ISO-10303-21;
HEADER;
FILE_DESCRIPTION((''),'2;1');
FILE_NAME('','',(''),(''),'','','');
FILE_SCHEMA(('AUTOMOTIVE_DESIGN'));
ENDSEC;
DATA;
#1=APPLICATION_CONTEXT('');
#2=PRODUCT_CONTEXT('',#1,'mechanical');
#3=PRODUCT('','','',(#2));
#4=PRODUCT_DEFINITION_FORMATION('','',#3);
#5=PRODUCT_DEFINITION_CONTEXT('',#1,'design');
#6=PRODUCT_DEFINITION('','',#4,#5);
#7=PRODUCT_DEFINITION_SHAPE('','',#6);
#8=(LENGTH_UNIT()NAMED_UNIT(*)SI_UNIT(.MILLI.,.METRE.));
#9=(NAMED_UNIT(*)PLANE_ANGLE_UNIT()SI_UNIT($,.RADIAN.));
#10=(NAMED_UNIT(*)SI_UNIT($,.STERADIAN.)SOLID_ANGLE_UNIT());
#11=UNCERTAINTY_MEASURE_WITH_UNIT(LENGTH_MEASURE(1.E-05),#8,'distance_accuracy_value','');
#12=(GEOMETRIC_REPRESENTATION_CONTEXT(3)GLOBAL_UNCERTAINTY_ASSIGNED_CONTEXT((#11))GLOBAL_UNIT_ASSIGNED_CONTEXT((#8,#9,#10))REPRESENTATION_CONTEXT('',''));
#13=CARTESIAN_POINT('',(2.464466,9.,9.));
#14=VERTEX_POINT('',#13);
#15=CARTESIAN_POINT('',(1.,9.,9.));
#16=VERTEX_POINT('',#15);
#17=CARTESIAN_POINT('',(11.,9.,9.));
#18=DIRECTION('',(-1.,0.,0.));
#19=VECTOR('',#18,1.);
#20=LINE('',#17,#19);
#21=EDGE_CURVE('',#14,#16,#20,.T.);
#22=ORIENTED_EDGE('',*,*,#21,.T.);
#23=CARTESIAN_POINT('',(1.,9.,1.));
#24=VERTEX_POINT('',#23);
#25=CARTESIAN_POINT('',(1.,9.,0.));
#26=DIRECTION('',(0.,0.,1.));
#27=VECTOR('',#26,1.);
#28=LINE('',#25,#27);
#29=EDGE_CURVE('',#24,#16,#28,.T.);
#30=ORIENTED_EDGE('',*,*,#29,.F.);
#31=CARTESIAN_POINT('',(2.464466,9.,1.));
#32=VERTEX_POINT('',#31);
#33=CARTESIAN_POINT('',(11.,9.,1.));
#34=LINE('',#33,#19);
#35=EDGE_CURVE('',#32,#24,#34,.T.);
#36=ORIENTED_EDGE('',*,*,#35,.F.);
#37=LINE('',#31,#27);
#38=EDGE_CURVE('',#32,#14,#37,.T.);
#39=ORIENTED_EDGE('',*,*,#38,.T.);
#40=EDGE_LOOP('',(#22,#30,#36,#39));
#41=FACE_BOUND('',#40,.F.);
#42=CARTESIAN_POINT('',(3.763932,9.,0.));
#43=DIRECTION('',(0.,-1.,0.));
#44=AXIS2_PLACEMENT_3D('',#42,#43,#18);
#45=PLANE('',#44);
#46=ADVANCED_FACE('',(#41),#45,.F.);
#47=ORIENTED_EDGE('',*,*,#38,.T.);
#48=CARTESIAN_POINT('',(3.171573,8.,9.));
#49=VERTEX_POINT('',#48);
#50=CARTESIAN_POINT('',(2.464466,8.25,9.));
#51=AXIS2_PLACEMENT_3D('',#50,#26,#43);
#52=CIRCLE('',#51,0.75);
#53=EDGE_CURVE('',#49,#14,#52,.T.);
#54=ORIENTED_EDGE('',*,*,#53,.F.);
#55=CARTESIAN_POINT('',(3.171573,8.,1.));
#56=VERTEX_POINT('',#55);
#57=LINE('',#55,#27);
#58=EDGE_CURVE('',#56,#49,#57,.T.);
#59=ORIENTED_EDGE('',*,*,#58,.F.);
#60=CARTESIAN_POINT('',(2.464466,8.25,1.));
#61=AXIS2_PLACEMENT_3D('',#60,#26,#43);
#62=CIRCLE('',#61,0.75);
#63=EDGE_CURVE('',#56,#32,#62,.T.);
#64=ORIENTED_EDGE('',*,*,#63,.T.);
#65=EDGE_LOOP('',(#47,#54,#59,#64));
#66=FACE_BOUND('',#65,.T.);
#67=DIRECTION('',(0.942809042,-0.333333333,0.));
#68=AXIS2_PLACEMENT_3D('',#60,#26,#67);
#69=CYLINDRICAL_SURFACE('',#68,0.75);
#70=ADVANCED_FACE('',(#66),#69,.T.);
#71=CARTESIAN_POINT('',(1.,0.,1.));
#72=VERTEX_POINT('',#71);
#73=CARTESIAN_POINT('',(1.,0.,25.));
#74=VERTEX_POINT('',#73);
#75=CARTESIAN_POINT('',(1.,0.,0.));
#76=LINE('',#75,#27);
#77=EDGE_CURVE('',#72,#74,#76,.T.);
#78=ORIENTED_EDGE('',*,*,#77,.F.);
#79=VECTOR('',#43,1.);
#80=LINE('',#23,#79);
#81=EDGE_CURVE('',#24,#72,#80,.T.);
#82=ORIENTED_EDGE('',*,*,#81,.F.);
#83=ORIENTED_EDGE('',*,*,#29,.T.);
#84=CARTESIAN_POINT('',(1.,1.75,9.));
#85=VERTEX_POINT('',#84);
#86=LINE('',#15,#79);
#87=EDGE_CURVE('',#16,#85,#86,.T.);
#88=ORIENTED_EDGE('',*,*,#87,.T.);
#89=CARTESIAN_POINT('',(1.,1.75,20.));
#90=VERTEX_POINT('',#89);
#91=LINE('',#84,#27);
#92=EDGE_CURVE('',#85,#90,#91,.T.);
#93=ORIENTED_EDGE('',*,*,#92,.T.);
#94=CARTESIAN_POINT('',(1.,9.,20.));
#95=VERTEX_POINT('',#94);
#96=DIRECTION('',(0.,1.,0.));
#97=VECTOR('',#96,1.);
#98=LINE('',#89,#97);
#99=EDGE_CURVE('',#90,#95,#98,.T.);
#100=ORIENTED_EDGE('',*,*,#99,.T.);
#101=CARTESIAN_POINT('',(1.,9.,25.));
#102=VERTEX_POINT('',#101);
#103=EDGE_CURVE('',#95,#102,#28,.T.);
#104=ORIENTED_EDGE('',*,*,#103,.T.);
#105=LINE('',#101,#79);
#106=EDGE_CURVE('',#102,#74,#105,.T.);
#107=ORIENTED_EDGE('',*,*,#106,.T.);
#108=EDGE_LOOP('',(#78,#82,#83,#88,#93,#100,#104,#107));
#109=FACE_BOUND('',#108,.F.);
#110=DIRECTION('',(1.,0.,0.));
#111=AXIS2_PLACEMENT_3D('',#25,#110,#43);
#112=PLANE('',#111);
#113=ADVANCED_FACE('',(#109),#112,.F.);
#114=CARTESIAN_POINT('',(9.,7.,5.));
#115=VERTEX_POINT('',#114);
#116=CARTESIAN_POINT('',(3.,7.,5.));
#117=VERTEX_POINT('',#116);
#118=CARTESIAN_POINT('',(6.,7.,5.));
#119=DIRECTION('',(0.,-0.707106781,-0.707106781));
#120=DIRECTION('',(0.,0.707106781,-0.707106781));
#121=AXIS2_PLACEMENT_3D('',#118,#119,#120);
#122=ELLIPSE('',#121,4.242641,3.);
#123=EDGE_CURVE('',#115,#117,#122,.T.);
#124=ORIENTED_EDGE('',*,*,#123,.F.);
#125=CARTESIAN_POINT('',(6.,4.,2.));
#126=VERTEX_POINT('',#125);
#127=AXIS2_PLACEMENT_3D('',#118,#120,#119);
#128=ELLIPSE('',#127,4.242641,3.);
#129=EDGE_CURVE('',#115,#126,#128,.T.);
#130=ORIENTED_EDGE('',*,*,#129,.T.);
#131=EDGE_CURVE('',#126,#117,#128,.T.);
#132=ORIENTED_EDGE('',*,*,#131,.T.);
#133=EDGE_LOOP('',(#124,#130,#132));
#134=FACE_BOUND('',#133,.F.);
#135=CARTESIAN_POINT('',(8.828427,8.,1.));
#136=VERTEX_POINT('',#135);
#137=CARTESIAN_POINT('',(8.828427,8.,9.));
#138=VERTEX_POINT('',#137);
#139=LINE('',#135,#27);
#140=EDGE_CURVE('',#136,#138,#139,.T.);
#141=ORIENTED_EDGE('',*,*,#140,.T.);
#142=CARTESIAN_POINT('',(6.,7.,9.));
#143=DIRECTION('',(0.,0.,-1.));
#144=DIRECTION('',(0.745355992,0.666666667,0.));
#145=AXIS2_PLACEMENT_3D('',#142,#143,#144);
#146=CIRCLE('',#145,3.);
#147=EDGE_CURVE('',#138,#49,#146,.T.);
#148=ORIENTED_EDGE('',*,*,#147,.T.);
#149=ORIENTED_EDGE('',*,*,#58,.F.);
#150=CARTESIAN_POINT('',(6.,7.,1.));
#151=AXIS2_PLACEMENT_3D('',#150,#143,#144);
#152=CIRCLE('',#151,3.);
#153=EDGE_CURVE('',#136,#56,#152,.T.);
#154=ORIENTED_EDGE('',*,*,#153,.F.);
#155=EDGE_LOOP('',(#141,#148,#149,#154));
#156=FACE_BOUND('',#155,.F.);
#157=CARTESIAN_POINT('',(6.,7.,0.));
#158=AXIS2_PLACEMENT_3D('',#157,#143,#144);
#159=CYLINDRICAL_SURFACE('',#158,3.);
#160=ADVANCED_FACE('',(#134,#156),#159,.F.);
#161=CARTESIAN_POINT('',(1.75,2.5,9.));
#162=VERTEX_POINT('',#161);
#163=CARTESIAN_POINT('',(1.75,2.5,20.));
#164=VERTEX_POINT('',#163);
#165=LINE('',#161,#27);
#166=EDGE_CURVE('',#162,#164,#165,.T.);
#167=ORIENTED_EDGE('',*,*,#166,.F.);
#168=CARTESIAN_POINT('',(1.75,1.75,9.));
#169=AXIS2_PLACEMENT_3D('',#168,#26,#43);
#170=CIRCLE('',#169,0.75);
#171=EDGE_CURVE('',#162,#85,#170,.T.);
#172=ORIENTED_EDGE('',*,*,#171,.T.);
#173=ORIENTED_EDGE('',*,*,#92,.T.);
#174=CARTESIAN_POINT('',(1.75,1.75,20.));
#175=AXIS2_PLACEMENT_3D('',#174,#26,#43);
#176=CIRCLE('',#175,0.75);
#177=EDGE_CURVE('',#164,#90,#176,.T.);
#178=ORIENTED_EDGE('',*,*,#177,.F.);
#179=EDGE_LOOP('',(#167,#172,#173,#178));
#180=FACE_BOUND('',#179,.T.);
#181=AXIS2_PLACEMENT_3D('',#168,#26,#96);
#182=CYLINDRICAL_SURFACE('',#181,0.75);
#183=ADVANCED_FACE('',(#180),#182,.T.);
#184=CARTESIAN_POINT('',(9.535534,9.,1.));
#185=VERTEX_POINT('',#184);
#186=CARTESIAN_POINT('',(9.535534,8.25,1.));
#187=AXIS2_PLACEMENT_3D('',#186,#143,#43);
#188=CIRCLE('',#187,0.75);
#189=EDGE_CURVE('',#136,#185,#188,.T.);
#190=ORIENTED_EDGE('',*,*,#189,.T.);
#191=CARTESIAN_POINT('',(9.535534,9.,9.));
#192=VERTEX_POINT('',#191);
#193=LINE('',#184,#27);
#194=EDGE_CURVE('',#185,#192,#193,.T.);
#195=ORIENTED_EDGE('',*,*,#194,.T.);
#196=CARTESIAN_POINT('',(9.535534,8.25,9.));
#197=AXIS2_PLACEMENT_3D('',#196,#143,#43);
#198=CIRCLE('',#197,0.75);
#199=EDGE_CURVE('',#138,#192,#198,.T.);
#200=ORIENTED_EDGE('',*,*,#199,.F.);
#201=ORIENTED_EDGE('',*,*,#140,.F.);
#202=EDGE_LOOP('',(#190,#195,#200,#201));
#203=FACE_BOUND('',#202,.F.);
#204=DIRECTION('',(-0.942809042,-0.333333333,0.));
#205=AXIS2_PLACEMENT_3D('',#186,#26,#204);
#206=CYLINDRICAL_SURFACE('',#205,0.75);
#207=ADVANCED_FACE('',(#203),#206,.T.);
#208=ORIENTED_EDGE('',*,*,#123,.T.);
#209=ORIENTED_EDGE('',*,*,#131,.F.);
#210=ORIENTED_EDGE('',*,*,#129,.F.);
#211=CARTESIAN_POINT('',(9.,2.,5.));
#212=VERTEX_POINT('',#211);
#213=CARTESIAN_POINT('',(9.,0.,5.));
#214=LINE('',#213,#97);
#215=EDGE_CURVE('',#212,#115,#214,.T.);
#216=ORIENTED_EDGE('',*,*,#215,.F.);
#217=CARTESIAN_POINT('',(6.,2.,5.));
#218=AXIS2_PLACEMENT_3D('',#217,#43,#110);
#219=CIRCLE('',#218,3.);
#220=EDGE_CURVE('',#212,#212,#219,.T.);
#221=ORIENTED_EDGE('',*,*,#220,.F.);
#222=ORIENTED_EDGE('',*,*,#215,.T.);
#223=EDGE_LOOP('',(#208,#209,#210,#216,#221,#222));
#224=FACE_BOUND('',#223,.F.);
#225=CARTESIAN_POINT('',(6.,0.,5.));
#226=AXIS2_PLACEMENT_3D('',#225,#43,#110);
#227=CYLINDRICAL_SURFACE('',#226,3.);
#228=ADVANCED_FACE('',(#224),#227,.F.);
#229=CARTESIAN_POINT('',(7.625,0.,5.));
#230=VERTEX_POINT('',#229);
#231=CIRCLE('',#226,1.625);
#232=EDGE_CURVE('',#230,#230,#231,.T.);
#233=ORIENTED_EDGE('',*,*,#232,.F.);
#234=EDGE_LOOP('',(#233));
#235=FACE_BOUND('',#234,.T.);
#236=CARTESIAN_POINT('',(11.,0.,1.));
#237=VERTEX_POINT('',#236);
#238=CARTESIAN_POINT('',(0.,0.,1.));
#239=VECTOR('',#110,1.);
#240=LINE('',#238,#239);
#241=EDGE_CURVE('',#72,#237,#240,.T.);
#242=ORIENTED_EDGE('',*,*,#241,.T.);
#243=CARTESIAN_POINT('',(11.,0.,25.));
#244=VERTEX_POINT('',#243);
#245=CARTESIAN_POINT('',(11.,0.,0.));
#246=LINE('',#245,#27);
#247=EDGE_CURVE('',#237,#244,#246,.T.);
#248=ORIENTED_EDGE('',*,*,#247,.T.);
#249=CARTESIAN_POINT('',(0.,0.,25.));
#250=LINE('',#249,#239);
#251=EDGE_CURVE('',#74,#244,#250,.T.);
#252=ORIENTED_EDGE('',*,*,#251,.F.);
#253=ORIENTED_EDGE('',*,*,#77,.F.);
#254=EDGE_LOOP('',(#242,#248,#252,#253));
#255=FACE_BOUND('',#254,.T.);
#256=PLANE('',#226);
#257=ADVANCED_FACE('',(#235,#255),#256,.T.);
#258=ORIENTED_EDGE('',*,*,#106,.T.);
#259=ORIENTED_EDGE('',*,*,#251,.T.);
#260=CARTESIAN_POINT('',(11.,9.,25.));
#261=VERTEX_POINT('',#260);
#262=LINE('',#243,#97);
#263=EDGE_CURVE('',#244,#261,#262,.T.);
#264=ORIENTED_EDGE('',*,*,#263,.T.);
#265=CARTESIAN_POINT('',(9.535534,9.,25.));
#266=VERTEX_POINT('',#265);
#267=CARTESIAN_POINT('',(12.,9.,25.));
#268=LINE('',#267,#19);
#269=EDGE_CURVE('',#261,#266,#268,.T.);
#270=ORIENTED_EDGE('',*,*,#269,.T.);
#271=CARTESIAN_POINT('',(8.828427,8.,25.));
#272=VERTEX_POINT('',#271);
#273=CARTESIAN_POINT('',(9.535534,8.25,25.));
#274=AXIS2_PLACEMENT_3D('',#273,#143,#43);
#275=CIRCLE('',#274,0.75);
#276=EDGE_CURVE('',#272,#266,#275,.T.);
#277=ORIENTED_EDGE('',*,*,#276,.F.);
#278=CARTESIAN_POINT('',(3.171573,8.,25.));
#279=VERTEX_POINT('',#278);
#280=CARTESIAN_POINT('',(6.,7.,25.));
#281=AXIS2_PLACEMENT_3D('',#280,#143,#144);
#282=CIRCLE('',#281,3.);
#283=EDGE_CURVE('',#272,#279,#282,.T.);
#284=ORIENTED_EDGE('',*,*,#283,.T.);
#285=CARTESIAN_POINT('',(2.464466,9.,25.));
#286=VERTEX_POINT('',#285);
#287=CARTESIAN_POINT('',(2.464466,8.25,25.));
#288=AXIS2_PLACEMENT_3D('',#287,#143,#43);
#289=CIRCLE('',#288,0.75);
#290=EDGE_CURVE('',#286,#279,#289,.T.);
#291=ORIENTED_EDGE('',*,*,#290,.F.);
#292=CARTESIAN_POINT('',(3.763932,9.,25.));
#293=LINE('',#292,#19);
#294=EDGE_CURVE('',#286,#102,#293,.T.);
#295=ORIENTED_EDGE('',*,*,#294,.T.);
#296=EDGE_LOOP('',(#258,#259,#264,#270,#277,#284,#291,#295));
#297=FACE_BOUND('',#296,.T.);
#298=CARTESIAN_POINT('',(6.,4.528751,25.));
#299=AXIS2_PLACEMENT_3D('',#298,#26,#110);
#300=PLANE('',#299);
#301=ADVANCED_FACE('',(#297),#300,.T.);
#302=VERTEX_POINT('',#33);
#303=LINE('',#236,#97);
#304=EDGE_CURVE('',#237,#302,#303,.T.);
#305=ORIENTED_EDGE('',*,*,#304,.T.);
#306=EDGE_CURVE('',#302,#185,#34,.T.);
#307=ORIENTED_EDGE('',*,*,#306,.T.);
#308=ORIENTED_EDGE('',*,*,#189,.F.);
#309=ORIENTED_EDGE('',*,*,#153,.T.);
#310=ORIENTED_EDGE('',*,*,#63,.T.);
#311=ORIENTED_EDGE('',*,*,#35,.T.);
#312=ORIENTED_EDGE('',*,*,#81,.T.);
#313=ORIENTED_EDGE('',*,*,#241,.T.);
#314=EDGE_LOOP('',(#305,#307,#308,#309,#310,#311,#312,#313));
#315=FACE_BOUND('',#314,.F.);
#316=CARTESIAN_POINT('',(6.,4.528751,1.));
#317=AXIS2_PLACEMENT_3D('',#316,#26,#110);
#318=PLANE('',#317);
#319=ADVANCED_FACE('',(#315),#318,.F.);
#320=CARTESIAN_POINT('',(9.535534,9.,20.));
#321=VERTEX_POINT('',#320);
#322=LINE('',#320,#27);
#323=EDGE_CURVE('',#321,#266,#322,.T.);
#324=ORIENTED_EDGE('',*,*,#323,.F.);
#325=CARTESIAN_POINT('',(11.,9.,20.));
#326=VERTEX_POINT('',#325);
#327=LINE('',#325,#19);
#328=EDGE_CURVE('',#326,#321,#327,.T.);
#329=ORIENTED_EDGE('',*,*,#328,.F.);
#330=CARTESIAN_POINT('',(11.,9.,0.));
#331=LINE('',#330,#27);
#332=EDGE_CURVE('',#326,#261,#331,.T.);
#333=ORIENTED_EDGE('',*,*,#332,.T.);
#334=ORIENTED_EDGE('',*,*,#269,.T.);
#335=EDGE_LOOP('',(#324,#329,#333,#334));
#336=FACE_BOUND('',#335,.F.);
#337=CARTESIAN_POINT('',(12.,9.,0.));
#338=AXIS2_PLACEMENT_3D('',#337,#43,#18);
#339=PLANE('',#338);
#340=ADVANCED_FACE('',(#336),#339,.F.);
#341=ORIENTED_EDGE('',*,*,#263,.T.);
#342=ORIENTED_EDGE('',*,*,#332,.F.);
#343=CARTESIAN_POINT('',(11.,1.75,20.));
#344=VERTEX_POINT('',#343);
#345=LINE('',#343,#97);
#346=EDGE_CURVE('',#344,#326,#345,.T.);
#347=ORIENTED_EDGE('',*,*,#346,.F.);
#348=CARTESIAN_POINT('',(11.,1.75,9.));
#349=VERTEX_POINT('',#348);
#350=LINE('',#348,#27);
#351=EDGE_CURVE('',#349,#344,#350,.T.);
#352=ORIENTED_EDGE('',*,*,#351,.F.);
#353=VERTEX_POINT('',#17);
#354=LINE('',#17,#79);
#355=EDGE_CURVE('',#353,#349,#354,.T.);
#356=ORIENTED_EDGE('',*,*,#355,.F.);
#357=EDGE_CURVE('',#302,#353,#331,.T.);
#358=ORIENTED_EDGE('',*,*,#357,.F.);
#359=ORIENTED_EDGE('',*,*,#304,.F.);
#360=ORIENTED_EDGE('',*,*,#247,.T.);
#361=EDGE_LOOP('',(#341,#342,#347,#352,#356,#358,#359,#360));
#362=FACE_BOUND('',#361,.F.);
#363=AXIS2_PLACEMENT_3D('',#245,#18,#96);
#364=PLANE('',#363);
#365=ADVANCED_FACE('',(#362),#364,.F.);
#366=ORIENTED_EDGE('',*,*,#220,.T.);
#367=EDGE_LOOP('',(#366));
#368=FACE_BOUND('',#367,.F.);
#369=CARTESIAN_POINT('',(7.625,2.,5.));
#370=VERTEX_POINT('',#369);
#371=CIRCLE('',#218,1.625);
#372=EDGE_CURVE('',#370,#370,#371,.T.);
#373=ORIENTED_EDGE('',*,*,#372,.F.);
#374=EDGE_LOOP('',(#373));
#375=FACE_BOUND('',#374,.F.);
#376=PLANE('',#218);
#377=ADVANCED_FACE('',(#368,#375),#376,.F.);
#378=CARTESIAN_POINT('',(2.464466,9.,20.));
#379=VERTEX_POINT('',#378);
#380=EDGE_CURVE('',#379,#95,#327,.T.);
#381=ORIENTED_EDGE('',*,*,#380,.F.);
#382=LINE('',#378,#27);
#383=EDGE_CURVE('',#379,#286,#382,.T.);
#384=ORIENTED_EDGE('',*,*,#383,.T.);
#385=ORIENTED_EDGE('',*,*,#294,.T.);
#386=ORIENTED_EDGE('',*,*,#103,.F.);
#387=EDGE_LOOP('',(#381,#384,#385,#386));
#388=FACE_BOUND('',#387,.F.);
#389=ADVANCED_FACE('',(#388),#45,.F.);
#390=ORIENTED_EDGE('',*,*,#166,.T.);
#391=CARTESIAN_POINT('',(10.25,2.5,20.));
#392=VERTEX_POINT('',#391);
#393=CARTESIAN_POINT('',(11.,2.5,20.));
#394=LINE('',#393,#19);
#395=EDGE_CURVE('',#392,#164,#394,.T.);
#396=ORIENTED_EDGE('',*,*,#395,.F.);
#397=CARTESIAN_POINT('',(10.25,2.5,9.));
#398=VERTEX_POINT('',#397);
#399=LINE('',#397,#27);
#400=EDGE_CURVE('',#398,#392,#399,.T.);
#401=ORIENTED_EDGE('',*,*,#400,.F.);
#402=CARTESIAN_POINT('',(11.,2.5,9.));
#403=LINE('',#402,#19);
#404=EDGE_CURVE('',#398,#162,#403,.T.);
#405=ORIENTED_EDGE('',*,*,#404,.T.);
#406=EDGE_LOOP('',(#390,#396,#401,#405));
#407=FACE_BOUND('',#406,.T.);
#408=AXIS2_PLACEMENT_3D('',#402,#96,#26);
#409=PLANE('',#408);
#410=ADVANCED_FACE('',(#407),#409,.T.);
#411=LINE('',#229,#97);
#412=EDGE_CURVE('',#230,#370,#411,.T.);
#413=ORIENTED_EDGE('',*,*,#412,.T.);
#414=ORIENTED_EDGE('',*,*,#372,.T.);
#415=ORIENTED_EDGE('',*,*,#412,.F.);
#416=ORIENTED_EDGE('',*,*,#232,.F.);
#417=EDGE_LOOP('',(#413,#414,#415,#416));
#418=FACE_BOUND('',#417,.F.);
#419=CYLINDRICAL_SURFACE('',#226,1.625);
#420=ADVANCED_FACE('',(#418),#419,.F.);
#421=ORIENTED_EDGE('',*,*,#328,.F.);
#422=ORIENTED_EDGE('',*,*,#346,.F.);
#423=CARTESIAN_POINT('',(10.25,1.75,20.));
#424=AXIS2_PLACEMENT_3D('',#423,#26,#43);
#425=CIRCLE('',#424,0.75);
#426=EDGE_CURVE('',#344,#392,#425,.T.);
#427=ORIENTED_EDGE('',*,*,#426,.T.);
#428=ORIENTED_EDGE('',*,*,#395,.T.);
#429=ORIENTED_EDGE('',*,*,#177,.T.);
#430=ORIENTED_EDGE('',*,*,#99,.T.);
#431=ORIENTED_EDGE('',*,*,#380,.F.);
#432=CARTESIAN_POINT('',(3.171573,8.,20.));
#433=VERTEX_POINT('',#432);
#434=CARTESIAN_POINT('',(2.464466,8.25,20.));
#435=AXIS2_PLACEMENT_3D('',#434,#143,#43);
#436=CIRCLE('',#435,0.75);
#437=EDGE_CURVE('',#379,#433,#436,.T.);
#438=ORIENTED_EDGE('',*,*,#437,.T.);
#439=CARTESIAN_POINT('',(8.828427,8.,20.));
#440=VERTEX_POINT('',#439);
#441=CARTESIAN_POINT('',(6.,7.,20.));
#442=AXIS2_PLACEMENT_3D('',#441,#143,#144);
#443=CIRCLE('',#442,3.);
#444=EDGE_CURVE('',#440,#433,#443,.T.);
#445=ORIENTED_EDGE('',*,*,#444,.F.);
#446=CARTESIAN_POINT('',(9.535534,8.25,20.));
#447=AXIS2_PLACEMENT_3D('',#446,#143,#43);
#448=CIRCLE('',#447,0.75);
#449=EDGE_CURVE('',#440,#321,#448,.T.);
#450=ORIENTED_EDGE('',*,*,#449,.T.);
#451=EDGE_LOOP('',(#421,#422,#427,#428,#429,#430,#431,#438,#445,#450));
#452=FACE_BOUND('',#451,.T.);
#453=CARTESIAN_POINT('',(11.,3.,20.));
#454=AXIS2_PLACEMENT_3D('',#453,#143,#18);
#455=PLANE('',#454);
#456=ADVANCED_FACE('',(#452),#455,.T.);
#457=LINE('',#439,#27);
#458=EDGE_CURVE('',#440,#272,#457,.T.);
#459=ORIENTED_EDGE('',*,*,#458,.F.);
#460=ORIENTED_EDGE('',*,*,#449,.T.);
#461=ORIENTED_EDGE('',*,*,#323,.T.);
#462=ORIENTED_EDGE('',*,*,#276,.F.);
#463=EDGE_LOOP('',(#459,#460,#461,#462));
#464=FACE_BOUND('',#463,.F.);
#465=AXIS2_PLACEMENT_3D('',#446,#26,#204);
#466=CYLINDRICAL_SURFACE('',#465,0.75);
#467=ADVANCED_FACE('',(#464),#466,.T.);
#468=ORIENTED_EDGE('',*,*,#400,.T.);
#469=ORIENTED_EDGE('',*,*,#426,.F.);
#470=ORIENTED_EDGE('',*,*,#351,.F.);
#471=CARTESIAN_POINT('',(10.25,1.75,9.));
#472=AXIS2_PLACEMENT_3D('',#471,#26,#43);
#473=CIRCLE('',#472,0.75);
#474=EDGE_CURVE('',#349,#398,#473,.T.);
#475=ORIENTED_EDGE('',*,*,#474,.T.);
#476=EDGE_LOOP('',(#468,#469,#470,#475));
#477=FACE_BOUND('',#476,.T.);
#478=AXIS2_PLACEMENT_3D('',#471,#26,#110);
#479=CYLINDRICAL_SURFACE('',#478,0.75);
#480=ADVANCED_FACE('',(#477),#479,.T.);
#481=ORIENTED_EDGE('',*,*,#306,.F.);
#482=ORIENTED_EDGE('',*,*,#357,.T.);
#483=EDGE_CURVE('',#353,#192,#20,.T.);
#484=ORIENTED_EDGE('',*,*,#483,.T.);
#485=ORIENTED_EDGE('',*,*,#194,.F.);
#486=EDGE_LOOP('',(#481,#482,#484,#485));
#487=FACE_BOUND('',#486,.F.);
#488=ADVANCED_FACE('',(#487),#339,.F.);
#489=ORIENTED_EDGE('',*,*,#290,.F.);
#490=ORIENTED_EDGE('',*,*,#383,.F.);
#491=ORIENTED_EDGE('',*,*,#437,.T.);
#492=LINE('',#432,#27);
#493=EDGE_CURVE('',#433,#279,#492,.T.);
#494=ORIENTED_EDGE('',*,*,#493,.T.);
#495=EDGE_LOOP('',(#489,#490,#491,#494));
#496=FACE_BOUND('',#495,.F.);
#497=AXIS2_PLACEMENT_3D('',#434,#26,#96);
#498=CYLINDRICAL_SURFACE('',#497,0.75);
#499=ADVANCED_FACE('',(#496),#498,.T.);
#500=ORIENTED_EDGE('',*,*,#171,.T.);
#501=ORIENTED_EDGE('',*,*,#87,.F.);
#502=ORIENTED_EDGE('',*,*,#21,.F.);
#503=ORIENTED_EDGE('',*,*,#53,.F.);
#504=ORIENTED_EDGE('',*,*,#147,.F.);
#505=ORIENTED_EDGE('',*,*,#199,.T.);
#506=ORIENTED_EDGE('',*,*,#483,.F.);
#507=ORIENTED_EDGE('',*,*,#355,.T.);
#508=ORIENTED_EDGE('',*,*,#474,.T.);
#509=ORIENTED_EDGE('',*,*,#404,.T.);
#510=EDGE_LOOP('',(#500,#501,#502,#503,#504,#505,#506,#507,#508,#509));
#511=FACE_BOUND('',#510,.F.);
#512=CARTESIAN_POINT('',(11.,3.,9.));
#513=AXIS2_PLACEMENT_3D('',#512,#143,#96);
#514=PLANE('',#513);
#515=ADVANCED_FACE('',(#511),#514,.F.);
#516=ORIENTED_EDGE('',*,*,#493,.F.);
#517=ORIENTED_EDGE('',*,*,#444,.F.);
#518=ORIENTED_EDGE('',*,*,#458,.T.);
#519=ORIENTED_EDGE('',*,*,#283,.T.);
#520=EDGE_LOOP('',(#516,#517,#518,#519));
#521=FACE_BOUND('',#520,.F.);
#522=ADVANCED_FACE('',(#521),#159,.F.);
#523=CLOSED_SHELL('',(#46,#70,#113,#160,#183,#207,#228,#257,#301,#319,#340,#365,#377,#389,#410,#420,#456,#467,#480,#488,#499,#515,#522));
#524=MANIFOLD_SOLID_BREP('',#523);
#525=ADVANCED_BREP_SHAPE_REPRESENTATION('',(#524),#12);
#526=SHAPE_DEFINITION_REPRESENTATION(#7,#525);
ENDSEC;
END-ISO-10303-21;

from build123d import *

# Parameters (mm, degrees)
F1_DEPTH  = 25
F2_DEPTH  = 1
F3_DEPTH  = 1
F4_W      = 6
F4_H      = 11
F4_H_2    = 1
F5_DEPTH  = 25
F6_R      = 3
F6_R_2    = 1.625
F7_DEPTH  = 7
F8_DEPTH  = 2
F9_DEPTH  = 1
F10_R     = 0.75
F11_DEPTH = 0.5
F12_R     = 0.75


with BuildPart() as f1:
    # F0 (on Top) → F1 (new body)
    with BuildSketch(Plane.XY):
        with BuildLine():
            Line((0, 9), (0, 0))
            Line((0, 0), (12, 0))
            Line((12, 0), (12, 9))
            Line((12, 9), (8.2360679775, 9))
            ThreePointArc((8.2360679775, 9), (6, 4), (3.7639320225, 9))
            Line((3.7639320225, 9), (0, 9))
        make_face()
    extrude(amount=F1_DEPTH)

    # F2 (cut): a face of the model
    f2_faces = [f1.faces().sort_by_distance(p)[0] for p in [
        (0, 4.5, 12.5),
    ]]
    extrude(f2_faces, amount=-F2_DEPTH, mode=Mode.SUBTRACT)

    # F3 (cut): a face of the model
    f3_faces = [f1.faces().sort_by_distance(p)[0] for p in [
        (12, 4.5, 12.5),
    ]]
    extrude(f3_faces, amount=-F3_DEPTH, mode=Mode.SUBTRACT)

    # F4 (on face) → F5 (cut)
    with BuildSketch(Plane.YZ.offset(11)):
        with Locations((6, 14.5)):
            Rectangle(F4_W, F4_H)
        with Locations((6, 0.5)):
            Rectangle(F4_W, F4_H_2)
    extrude(amount=-F5_DEPTH, mode=Mode.SUBTRACT)

    # F6 (on face) → F7 (cut)
    with BuildSketch(Plane.XZ):
        with Locations((6, 5)):
            Circle(F6_R)
        with Locations((6, 5)):
            Circle(F6_R_2, mode=Mode.SUBTRACT)
        with Locations((6, 5)):
            Circle(F6_R_2)
    extrude(amount=-F7_DEPTH, mode=Mode.SUBTRACT)

    # F6 (on face) → F8 (join)
    with BuildSketch(Plane.XZ):
        with Locations((6, 5)):
            Circle(F6_R)
        with Locations((6, 5)):
            Circle(F6_R_2, mode=Mode.SUBTRACT)
    extrude(amount=-F8_DEPTH)

    # F9 (cut): a face of the model
    f9_faces = [f1.faces().sort_by_distance(p)[0] for p in [
        (6, 1.5, 0),
    ]]
    extrude(f9_faces, amount=-F9_DEPTH, mode=Mode.SUBTRACT)

    # F10
    f10_edges = [f1.edges().sort_by_distance(p)[0] for p in [
        (8.236068, 9, 5),
        (3.763932, 9, 5),
        (3.763932, 9, 22.5),
        (8.236068, 9, 22.5),
    ]]
    fillet(f10_edges, radius=F10_R)

    # F11 (cut): a face of the model
    f11_faces = [f1.faces().sort_by_distance(p)[0] for p in [
        (6, 3, 14.5),
    ]]
    extrude(f11_faces, amount=-F11_DEPTH, mode=Mode.SUBTRACT)

    # F12
    f12_edges = [f1.edges().sort_by_distance(p)[0] for p in [
        (11, 2.5, 14.5),
        (1, 2.5, 14.5),
    ]]
    fillet(f12_edges, radius=F12_R)


solid = f1.part
